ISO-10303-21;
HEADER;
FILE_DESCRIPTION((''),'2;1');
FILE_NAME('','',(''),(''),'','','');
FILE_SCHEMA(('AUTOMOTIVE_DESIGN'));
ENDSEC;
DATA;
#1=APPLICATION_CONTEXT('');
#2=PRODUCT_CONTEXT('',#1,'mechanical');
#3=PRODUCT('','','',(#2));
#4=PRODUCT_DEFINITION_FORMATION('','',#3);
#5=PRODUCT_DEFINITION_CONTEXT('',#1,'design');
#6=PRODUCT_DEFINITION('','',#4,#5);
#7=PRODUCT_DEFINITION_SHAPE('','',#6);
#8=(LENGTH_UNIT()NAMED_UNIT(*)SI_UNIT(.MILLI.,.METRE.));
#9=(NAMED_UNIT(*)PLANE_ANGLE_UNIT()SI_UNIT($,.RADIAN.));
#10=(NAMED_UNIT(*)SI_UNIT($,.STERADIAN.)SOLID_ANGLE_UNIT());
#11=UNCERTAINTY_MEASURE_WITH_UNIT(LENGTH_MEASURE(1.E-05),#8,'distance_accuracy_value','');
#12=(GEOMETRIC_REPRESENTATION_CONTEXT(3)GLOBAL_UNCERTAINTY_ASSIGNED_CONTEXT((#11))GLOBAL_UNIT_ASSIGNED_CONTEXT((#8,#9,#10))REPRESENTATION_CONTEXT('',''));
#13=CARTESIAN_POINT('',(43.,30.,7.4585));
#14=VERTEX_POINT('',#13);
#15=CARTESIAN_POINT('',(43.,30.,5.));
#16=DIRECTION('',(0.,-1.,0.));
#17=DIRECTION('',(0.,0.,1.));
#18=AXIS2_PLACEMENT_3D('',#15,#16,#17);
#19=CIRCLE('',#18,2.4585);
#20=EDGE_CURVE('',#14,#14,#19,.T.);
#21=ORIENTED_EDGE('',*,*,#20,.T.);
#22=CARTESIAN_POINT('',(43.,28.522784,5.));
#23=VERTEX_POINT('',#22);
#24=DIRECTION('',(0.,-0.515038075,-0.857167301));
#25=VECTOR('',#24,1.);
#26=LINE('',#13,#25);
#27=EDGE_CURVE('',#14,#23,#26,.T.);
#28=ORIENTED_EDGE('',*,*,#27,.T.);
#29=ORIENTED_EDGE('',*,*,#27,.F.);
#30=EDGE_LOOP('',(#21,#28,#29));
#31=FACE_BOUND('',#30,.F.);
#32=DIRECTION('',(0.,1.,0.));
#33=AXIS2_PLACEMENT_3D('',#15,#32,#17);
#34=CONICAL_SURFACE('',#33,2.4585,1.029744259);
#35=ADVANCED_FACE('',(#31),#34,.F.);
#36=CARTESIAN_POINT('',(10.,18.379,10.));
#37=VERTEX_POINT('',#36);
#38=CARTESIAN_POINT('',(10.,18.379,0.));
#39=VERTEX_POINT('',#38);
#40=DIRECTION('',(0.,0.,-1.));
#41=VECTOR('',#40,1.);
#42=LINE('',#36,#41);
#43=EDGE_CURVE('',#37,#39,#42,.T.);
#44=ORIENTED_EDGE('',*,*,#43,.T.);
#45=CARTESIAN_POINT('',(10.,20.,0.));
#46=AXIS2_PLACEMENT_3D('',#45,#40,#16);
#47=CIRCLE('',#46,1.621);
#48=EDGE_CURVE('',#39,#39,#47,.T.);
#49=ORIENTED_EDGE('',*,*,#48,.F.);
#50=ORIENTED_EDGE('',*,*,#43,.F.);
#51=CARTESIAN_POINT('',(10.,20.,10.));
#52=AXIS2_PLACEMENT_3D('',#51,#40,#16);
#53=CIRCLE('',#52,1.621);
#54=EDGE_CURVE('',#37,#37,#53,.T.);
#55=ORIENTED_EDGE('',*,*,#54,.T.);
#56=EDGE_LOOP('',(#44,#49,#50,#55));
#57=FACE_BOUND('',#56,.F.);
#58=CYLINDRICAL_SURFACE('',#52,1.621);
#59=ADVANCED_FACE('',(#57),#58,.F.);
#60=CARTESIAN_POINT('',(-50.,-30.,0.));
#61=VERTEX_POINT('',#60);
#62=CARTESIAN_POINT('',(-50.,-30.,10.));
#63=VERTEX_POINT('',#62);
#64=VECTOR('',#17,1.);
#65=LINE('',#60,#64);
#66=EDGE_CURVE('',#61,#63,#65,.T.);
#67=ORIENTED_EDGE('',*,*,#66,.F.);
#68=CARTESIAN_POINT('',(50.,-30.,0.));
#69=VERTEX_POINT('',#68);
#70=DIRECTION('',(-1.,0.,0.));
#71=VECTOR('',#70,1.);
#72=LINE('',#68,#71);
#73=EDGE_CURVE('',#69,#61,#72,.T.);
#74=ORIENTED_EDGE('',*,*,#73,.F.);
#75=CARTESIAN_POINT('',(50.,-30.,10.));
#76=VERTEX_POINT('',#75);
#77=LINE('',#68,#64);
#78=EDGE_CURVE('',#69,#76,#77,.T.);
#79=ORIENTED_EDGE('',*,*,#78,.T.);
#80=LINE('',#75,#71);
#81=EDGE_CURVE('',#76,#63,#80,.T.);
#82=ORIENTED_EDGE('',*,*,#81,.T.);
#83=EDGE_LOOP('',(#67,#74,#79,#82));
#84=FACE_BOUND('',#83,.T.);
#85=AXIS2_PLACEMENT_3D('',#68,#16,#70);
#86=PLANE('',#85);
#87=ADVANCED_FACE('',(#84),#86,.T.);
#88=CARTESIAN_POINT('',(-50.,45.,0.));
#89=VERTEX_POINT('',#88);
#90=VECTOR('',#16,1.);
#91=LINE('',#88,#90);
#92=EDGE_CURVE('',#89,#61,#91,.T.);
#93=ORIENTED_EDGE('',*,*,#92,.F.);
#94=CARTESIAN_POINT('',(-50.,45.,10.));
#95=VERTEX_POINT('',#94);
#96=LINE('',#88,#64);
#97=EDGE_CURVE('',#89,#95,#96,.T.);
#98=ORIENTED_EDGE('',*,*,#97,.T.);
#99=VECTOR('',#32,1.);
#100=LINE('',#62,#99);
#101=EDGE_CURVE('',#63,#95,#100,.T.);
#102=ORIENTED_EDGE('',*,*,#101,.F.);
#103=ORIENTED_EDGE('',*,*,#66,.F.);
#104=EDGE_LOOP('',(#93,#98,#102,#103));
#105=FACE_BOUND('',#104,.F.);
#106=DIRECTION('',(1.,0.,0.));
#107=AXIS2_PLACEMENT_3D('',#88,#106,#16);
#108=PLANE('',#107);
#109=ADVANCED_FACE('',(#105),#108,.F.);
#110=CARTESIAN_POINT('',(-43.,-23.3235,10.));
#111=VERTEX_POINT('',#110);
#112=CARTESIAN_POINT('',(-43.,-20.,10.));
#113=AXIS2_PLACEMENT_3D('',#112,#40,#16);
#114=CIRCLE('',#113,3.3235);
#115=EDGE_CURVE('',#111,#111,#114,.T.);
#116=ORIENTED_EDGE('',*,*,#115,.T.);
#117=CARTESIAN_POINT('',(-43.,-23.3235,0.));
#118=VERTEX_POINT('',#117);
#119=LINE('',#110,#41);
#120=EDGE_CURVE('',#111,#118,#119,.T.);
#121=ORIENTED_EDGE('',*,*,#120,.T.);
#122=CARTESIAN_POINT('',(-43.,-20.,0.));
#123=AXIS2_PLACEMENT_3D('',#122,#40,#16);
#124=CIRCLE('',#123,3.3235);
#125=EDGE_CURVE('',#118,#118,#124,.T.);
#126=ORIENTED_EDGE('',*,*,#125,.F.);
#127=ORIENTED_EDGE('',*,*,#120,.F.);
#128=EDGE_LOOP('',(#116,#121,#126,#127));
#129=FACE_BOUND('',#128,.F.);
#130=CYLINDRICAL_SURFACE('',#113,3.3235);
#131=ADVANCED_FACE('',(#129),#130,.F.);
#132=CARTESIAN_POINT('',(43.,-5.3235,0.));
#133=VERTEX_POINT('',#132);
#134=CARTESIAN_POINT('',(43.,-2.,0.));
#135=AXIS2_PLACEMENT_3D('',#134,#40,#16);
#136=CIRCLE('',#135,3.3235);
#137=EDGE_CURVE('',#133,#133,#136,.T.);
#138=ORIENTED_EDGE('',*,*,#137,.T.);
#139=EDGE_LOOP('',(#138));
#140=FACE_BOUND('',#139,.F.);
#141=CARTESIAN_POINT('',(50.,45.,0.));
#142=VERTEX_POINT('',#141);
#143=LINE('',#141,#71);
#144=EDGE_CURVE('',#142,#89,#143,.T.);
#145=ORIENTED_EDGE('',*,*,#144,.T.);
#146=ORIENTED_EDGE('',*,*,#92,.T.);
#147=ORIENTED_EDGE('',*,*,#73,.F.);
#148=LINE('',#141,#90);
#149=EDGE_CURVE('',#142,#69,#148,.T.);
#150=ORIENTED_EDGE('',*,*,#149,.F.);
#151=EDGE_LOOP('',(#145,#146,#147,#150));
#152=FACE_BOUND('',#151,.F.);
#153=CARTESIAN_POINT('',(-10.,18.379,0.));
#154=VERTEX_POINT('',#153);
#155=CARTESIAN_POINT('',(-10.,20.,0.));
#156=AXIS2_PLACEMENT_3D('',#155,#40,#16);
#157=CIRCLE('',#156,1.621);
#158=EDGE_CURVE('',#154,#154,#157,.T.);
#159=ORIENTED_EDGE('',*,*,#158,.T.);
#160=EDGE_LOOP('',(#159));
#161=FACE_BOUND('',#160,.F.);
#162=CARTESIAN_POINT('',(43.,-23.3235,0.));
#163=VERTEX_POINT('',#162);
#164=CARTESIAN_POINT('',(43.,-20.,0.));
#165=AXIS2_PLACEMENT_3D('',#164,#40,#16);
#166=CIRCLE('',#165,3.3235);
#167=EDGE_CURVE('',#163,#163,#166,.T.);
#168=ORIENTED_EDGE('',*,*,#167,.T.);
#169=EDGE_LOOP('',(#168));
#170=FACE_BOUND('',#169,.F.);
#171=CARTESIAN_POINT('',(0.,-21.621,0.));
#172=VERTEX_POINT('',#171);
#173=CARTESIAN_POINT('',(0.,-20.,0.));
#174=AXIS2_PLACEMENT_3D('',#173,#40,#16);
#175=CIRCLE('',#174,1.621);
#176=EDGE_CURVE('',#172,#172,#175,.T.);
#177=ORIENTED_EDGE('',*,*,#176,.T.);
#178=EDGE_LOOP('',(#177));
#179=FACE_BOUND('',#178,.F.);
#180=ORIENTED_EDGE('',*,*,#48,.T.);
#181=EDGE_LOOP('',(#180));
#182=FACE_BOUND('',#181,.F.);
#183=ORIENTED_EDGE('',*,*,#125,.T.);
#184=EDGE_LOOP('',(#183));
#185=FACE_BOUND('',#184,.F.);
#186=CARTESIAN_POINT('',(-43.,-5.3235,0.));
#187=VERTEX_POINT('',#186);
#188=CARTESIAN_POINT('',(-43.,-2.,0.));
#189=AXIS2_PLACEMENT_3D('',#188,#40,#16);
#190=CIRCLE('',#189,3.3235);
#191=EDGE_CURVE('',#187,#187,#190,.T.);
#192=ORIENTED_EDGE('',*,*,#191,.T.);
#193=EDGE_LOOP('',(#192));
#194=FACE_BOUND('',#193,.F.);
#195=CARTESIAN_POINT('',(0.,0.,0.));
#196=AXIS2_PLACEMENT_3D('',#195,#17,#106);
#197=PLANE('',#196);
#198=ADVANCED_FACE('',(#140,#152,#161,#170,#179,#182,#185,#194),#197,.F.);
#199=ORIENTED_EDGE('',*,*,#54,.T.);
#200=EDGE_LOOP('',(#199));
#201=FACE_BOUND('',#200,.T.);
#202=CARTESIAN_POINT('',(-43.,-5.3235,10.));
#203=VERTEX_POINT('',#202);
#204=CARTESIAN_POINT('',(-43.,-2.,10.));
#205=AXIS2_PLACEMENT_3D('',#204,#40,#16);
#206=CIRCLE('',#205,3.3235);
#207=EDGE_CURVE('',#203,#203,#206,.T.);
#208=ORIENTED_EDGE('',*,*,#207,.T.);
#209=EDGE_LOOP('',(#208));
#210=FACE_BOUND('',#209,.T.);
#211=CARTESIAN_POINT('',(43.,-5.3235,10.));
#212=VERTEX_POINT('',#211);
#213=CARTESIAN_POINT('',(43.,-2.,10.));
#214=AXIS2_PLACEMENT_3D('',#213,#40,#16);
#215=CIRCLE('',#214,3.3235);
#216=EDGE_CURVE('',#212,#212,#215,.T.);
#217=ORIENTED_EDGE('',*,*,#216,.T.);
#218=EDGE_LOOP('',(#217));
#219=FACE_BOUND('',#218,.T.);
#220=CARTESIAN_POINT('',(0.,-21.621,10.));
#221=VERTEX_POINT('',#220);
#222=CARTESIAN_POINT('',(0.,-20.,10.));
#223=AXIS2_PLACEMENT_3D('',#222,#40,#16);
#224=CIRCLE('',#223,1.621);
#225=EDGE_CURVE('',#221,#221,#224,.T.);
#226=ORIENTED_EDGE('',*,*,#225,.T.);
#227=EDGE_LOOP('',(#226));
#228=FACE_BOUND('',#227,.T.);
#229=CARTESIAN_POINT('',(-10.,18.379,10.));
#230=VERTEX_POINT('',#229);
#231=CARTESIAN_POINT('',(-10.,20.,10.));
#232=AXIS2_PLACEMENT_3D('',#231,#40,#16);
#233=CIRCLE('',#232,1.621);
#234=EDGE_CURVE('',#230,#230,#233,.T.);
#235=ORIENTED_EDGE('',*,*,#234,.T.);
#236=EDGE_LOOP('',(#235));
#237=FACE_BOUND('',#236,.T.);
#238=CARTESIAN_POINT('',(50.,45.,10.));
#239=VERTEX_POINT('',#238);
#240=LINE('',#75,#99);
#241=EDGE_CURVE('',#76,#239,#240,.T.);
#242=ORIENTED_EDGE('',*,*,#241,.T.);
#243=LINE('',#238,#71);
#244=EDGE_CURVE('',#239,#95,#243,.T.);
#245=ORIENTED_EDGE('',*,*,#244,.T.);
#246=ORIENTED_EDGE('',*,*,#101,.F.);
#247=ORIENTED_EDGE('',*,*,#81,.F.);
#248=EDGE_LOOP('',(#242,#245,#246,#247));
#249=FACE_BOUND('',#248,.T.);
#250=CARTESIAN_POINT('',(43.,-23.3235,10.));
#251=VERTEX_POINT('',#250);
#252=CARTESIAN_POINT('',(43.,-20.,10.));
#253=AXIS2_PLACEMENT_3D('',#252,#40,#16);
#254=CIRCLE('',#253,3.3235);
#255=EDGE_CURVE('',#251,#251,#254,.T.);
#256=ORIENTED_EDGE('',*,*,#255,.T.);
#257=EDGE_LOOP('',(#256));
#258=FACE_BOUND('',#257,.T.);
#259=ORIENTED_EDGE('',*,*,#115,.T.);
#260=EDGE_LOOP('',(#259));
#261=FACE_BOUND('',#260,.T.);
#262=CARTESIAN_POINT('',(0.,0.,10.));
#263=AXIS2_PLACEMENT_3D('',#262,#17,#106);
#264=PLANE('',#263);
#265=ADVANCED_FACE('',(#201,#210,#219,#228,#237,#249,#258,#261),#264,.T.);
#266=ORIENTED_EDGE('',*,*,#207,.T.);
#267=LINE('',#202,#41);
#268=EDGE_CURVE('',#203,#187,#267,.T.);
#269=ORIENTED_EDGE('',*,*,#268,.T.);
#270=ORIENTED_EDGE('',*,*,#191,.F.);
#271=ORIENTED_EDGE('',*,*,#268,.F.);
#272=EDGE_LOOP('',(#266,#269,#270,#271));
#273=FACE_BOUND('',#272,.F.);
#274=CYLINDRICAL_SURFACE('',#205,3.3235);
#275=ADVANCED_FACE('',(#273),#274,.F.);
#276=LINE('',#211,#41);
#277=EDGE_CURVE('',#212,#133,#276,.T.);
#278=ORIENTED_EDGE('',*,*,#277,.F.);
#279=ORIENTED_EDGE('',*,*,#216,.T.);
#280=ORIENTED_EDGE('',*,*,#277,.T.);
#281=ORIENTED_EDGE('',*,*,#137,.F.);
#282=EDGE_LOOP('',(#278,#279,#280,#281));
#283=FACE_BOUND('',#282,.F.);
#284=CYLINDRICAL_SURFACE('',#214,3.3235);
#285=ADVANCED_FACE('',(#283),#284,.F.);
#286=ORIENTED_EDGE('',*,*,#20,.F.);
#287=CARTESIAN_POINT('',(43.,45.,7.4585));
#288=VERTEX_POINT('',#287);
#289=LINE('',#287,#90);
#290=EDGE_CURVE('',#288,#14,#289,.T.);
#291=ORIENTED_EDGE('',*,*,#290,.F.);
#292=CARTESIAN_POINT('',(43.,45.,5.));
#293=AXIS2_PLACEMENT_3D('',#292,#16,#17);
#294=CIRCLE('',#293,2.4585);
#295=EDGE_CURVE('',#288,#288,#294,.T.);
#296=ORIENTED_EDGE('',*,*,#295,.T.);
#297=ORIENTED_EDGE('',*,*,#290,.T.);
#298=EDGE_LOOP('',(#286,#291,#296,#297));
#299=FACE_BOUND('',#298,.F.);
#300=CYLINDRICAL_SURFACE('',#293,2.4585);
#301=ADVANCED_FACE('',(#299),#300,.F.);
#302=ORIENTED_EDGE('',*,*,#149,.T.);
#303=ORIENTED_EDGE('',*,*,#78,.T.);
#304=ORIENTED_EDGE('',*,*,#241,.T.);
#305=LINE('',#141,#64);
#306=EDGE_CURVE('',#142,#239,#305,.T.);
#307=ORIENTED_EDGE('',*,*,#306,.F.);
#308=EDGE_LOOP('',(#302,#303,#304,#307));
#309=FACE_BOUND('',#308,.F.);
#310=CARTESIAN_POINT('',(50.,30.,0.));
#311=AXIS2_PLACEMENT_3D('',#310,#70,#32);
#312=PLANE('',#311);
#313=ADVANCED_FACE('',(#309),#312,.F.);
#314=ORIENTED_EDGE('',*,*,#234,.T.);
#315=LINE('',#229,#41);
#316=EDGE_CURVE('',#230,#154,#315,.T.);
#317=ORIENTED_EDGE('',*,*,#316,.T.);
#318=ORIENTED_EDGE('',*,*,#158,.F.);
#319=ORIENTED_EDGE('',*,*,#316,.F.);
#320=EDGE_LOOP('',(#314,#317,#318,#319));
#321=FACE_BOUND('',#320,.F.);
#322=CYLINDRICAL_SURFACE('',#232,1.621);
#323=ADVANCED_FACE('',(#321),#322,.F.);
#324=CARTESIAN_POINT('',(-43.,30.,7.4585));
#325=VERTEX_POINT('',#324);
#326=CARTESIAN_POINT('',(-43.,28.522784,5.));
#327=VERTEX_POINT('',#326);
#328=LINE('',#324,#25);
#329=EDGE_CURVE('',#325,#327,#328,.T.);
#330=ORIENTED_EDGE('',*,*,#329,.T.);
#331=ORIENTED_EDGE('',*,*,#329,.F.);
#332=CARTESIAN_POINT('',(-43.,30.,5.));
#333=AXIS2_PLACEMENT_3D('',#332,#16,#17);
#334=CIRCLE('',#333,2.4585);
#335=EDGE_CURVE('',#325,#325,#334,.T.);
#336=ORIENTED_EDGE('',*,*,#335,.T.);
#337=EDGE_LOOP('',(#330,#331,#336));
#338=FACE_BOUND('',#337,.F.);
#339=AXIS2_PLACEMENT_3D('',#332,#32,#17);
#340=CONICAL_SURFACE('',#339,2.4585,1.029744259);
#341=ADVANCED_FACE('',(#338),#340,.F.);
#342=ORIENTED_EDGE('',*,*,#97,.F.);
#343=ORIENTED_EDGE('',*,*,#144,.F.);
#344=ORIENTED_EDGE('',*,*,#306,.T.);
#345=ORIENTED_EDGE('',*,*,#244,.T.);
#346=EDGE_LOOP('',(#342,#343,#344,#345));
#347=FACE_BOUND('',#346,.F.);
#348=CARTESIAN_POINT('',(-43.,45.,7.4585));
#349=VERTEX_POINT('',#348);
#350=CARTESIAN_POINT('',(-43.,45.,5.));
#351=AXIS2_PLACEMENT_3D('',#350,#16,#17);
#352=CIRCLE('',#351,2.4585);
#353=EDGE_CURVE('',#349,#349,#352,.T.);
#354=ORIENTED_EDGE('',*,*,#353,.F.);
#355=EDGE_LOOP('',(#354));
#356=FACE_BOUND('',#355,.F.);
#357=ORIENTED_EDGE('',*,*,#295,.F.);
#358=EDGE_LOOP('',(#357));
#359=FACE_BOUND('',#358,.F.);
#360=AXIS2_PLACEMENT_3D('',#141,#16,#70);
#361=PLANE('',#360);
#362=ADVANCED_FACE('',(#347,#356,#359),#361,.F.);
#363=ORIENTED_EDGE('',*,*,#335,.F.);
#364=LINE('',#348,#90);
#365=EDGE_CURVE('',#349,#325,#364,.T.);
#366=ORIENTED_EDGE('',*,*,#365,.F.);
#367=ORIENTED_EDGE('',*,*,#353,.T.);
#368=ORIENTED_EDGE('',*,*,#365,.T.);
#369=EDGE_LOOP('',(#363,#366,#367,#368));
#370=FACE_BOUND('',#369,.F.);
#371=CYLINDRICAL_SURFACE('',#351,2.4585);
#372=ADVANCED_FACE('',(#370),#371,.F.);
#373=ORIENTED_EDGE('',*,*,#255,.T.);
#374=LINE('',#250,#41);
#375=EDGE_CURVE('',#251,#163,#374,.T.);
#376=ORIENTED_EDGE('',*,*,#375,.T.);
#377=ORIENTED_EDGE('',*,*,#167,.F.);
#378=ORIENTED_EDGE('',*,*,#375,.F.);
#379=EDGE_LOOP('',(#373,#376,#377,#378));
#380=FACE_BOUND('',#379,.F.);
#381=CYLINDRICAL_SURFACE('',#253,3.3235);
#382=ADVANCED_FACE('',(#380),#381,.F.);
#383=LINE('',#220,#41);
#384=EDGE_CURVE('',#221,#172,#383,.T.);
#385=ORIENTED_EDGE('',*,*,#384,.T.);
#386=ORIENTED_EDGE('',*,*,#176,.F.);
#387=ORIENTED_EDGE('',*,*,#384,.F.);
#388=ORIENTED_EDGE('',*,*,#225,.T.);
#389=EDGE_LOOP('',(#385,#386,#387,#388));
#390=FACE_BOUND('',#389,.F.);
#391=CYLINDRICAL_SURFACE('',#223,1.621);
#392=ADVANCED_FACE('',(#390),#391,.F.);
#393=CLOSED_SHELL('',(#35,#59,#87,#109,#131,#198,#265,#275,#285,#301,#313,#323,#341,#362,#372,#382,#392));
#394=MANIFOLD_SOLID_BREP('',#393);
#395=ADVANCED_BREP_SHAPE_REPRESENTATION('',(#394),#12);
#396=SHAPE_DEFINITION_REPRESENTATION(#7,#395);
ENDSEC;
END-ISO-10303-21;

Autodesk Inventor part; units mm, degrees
ref_plane "YZ Plane" through (0, 0, 0) normal (1, 0, 0) x (0, 1, 0)
ref_plane "XZ Plane" through (0, 0, 0) normal (0, 1, 0) x (-1, 0, 0)
ref_plane "XY Plane" through (0, 0, 0) normal (0, 0, 1) x (1, 0, 0)
sketch "Sketch1" plane through (0, 0, 0) normal (0, 0, 1) x (1, 0, 0)
  line L0 (50, -30) -> (-50, -30)
  line L1 (-50, -30) -> (-50, 30)
  line L2 (-50, 30) -> (50, 30)
  line L3 (50, 30) -> (50, -30)
  line L4 (50, -30) -> (-50, 30) construction
  line L5 (-50, -30) -> (50, 30) construction
  line L6 (-70, 0) -> (70, 0) projected
  line L7 (-50, 30) -> (50, 30)
  line L8 (50, 30) -> (50, 45)
  line L9 (50, 45) -> (-50, 45)
  line L10 (-50, 45) -> (-50, 30)
  point P0 (0, 0)
  dimension "d2" = 100
  dimension "d3" = 60
  dimension "d45" = 15
extrude "Extrusion1" add sketch "Sketch1" along normal blind 10 contours L0 L1 L6 L3 | L6 L1 L2 L3
sketch "Sketch2" plane through (0, 0, 10) normal (0, 0, 1) x (1, 0, 0)
  line L0 (-43, -20) -> (43, -20) construction
  line L1 (43, -20) -> (43, -2) construction
  line L2 (43, -2) -> (-43, -2) construction
  line L3 (-43, -2) -> (-43, -20) construction
  line L4 (-50, -30) -> (50, -30) construction
  line L5 (0, -42) -> (0, 42) construction
  point P0 (0, 0)
  dimension "d6" = 86
  dimension "d7" = 18
  dimension "d8" = 10
hole "Hole1" at (-43, -2, 10) at (43, -2, 10) at (43, -20, 10) at (-43, -20, 10) direction (0, 0, -1) diameter 6.647 end through all thread size "M8x1.25" class "6H" standard "ISO Metric profile"
sketch "Sketch3" plane through (0, 0, 10) normal (0, 0, 1) x (1, 0, 0)
  line L0 (50, 30) -> (-50, 30) projected
  line L1 (0, -42) -> (0, 42) projected
  point P0 (0, 0)
  point P1 (-10, 20)
  point P2 (10, 20)
  point P3 (0, -20)
  dimension "d16" = 10
  dimension "d17" = 10
  dimension "d18" = 40
hole "Hole4" at (-10, 20, 10) at (10, 20, 10) at (0, -20, 10) direction (0, 0, -1) diameter 3.242 end through all thread size "M4x0.7" class "6H" standard "ISO Metric profile"
extrude "Extrusion3" add sketch "Sketch1" along normal blind 10 contours L2 L10 L9 L8
sketch "Sketch5" plane through (-50, 45, 0) normal (0, 1, 0) x (1, 0, 0)
  line L0 (0, -10) -> (100, -10) construction
  line L1 (50, -10) -> (50, 0) construction
  line L2 (48.379, 0) -> (48.379, -10) construction
  point P0 (93, -5)
  point P1 (7, -5)
  dimension "d48" = 5
  dimension "d49" = 86
hole "Hole5" at (43, 45, 5) at (-43, 45, 5) direction (0, -1, 0) diameter 4.917 depth 15 tip angle 118 thread size "M6x1" class "6H" standard "ISO Metric profile"
properties part number "Lift_adaptor" material "Stainless Steel"
